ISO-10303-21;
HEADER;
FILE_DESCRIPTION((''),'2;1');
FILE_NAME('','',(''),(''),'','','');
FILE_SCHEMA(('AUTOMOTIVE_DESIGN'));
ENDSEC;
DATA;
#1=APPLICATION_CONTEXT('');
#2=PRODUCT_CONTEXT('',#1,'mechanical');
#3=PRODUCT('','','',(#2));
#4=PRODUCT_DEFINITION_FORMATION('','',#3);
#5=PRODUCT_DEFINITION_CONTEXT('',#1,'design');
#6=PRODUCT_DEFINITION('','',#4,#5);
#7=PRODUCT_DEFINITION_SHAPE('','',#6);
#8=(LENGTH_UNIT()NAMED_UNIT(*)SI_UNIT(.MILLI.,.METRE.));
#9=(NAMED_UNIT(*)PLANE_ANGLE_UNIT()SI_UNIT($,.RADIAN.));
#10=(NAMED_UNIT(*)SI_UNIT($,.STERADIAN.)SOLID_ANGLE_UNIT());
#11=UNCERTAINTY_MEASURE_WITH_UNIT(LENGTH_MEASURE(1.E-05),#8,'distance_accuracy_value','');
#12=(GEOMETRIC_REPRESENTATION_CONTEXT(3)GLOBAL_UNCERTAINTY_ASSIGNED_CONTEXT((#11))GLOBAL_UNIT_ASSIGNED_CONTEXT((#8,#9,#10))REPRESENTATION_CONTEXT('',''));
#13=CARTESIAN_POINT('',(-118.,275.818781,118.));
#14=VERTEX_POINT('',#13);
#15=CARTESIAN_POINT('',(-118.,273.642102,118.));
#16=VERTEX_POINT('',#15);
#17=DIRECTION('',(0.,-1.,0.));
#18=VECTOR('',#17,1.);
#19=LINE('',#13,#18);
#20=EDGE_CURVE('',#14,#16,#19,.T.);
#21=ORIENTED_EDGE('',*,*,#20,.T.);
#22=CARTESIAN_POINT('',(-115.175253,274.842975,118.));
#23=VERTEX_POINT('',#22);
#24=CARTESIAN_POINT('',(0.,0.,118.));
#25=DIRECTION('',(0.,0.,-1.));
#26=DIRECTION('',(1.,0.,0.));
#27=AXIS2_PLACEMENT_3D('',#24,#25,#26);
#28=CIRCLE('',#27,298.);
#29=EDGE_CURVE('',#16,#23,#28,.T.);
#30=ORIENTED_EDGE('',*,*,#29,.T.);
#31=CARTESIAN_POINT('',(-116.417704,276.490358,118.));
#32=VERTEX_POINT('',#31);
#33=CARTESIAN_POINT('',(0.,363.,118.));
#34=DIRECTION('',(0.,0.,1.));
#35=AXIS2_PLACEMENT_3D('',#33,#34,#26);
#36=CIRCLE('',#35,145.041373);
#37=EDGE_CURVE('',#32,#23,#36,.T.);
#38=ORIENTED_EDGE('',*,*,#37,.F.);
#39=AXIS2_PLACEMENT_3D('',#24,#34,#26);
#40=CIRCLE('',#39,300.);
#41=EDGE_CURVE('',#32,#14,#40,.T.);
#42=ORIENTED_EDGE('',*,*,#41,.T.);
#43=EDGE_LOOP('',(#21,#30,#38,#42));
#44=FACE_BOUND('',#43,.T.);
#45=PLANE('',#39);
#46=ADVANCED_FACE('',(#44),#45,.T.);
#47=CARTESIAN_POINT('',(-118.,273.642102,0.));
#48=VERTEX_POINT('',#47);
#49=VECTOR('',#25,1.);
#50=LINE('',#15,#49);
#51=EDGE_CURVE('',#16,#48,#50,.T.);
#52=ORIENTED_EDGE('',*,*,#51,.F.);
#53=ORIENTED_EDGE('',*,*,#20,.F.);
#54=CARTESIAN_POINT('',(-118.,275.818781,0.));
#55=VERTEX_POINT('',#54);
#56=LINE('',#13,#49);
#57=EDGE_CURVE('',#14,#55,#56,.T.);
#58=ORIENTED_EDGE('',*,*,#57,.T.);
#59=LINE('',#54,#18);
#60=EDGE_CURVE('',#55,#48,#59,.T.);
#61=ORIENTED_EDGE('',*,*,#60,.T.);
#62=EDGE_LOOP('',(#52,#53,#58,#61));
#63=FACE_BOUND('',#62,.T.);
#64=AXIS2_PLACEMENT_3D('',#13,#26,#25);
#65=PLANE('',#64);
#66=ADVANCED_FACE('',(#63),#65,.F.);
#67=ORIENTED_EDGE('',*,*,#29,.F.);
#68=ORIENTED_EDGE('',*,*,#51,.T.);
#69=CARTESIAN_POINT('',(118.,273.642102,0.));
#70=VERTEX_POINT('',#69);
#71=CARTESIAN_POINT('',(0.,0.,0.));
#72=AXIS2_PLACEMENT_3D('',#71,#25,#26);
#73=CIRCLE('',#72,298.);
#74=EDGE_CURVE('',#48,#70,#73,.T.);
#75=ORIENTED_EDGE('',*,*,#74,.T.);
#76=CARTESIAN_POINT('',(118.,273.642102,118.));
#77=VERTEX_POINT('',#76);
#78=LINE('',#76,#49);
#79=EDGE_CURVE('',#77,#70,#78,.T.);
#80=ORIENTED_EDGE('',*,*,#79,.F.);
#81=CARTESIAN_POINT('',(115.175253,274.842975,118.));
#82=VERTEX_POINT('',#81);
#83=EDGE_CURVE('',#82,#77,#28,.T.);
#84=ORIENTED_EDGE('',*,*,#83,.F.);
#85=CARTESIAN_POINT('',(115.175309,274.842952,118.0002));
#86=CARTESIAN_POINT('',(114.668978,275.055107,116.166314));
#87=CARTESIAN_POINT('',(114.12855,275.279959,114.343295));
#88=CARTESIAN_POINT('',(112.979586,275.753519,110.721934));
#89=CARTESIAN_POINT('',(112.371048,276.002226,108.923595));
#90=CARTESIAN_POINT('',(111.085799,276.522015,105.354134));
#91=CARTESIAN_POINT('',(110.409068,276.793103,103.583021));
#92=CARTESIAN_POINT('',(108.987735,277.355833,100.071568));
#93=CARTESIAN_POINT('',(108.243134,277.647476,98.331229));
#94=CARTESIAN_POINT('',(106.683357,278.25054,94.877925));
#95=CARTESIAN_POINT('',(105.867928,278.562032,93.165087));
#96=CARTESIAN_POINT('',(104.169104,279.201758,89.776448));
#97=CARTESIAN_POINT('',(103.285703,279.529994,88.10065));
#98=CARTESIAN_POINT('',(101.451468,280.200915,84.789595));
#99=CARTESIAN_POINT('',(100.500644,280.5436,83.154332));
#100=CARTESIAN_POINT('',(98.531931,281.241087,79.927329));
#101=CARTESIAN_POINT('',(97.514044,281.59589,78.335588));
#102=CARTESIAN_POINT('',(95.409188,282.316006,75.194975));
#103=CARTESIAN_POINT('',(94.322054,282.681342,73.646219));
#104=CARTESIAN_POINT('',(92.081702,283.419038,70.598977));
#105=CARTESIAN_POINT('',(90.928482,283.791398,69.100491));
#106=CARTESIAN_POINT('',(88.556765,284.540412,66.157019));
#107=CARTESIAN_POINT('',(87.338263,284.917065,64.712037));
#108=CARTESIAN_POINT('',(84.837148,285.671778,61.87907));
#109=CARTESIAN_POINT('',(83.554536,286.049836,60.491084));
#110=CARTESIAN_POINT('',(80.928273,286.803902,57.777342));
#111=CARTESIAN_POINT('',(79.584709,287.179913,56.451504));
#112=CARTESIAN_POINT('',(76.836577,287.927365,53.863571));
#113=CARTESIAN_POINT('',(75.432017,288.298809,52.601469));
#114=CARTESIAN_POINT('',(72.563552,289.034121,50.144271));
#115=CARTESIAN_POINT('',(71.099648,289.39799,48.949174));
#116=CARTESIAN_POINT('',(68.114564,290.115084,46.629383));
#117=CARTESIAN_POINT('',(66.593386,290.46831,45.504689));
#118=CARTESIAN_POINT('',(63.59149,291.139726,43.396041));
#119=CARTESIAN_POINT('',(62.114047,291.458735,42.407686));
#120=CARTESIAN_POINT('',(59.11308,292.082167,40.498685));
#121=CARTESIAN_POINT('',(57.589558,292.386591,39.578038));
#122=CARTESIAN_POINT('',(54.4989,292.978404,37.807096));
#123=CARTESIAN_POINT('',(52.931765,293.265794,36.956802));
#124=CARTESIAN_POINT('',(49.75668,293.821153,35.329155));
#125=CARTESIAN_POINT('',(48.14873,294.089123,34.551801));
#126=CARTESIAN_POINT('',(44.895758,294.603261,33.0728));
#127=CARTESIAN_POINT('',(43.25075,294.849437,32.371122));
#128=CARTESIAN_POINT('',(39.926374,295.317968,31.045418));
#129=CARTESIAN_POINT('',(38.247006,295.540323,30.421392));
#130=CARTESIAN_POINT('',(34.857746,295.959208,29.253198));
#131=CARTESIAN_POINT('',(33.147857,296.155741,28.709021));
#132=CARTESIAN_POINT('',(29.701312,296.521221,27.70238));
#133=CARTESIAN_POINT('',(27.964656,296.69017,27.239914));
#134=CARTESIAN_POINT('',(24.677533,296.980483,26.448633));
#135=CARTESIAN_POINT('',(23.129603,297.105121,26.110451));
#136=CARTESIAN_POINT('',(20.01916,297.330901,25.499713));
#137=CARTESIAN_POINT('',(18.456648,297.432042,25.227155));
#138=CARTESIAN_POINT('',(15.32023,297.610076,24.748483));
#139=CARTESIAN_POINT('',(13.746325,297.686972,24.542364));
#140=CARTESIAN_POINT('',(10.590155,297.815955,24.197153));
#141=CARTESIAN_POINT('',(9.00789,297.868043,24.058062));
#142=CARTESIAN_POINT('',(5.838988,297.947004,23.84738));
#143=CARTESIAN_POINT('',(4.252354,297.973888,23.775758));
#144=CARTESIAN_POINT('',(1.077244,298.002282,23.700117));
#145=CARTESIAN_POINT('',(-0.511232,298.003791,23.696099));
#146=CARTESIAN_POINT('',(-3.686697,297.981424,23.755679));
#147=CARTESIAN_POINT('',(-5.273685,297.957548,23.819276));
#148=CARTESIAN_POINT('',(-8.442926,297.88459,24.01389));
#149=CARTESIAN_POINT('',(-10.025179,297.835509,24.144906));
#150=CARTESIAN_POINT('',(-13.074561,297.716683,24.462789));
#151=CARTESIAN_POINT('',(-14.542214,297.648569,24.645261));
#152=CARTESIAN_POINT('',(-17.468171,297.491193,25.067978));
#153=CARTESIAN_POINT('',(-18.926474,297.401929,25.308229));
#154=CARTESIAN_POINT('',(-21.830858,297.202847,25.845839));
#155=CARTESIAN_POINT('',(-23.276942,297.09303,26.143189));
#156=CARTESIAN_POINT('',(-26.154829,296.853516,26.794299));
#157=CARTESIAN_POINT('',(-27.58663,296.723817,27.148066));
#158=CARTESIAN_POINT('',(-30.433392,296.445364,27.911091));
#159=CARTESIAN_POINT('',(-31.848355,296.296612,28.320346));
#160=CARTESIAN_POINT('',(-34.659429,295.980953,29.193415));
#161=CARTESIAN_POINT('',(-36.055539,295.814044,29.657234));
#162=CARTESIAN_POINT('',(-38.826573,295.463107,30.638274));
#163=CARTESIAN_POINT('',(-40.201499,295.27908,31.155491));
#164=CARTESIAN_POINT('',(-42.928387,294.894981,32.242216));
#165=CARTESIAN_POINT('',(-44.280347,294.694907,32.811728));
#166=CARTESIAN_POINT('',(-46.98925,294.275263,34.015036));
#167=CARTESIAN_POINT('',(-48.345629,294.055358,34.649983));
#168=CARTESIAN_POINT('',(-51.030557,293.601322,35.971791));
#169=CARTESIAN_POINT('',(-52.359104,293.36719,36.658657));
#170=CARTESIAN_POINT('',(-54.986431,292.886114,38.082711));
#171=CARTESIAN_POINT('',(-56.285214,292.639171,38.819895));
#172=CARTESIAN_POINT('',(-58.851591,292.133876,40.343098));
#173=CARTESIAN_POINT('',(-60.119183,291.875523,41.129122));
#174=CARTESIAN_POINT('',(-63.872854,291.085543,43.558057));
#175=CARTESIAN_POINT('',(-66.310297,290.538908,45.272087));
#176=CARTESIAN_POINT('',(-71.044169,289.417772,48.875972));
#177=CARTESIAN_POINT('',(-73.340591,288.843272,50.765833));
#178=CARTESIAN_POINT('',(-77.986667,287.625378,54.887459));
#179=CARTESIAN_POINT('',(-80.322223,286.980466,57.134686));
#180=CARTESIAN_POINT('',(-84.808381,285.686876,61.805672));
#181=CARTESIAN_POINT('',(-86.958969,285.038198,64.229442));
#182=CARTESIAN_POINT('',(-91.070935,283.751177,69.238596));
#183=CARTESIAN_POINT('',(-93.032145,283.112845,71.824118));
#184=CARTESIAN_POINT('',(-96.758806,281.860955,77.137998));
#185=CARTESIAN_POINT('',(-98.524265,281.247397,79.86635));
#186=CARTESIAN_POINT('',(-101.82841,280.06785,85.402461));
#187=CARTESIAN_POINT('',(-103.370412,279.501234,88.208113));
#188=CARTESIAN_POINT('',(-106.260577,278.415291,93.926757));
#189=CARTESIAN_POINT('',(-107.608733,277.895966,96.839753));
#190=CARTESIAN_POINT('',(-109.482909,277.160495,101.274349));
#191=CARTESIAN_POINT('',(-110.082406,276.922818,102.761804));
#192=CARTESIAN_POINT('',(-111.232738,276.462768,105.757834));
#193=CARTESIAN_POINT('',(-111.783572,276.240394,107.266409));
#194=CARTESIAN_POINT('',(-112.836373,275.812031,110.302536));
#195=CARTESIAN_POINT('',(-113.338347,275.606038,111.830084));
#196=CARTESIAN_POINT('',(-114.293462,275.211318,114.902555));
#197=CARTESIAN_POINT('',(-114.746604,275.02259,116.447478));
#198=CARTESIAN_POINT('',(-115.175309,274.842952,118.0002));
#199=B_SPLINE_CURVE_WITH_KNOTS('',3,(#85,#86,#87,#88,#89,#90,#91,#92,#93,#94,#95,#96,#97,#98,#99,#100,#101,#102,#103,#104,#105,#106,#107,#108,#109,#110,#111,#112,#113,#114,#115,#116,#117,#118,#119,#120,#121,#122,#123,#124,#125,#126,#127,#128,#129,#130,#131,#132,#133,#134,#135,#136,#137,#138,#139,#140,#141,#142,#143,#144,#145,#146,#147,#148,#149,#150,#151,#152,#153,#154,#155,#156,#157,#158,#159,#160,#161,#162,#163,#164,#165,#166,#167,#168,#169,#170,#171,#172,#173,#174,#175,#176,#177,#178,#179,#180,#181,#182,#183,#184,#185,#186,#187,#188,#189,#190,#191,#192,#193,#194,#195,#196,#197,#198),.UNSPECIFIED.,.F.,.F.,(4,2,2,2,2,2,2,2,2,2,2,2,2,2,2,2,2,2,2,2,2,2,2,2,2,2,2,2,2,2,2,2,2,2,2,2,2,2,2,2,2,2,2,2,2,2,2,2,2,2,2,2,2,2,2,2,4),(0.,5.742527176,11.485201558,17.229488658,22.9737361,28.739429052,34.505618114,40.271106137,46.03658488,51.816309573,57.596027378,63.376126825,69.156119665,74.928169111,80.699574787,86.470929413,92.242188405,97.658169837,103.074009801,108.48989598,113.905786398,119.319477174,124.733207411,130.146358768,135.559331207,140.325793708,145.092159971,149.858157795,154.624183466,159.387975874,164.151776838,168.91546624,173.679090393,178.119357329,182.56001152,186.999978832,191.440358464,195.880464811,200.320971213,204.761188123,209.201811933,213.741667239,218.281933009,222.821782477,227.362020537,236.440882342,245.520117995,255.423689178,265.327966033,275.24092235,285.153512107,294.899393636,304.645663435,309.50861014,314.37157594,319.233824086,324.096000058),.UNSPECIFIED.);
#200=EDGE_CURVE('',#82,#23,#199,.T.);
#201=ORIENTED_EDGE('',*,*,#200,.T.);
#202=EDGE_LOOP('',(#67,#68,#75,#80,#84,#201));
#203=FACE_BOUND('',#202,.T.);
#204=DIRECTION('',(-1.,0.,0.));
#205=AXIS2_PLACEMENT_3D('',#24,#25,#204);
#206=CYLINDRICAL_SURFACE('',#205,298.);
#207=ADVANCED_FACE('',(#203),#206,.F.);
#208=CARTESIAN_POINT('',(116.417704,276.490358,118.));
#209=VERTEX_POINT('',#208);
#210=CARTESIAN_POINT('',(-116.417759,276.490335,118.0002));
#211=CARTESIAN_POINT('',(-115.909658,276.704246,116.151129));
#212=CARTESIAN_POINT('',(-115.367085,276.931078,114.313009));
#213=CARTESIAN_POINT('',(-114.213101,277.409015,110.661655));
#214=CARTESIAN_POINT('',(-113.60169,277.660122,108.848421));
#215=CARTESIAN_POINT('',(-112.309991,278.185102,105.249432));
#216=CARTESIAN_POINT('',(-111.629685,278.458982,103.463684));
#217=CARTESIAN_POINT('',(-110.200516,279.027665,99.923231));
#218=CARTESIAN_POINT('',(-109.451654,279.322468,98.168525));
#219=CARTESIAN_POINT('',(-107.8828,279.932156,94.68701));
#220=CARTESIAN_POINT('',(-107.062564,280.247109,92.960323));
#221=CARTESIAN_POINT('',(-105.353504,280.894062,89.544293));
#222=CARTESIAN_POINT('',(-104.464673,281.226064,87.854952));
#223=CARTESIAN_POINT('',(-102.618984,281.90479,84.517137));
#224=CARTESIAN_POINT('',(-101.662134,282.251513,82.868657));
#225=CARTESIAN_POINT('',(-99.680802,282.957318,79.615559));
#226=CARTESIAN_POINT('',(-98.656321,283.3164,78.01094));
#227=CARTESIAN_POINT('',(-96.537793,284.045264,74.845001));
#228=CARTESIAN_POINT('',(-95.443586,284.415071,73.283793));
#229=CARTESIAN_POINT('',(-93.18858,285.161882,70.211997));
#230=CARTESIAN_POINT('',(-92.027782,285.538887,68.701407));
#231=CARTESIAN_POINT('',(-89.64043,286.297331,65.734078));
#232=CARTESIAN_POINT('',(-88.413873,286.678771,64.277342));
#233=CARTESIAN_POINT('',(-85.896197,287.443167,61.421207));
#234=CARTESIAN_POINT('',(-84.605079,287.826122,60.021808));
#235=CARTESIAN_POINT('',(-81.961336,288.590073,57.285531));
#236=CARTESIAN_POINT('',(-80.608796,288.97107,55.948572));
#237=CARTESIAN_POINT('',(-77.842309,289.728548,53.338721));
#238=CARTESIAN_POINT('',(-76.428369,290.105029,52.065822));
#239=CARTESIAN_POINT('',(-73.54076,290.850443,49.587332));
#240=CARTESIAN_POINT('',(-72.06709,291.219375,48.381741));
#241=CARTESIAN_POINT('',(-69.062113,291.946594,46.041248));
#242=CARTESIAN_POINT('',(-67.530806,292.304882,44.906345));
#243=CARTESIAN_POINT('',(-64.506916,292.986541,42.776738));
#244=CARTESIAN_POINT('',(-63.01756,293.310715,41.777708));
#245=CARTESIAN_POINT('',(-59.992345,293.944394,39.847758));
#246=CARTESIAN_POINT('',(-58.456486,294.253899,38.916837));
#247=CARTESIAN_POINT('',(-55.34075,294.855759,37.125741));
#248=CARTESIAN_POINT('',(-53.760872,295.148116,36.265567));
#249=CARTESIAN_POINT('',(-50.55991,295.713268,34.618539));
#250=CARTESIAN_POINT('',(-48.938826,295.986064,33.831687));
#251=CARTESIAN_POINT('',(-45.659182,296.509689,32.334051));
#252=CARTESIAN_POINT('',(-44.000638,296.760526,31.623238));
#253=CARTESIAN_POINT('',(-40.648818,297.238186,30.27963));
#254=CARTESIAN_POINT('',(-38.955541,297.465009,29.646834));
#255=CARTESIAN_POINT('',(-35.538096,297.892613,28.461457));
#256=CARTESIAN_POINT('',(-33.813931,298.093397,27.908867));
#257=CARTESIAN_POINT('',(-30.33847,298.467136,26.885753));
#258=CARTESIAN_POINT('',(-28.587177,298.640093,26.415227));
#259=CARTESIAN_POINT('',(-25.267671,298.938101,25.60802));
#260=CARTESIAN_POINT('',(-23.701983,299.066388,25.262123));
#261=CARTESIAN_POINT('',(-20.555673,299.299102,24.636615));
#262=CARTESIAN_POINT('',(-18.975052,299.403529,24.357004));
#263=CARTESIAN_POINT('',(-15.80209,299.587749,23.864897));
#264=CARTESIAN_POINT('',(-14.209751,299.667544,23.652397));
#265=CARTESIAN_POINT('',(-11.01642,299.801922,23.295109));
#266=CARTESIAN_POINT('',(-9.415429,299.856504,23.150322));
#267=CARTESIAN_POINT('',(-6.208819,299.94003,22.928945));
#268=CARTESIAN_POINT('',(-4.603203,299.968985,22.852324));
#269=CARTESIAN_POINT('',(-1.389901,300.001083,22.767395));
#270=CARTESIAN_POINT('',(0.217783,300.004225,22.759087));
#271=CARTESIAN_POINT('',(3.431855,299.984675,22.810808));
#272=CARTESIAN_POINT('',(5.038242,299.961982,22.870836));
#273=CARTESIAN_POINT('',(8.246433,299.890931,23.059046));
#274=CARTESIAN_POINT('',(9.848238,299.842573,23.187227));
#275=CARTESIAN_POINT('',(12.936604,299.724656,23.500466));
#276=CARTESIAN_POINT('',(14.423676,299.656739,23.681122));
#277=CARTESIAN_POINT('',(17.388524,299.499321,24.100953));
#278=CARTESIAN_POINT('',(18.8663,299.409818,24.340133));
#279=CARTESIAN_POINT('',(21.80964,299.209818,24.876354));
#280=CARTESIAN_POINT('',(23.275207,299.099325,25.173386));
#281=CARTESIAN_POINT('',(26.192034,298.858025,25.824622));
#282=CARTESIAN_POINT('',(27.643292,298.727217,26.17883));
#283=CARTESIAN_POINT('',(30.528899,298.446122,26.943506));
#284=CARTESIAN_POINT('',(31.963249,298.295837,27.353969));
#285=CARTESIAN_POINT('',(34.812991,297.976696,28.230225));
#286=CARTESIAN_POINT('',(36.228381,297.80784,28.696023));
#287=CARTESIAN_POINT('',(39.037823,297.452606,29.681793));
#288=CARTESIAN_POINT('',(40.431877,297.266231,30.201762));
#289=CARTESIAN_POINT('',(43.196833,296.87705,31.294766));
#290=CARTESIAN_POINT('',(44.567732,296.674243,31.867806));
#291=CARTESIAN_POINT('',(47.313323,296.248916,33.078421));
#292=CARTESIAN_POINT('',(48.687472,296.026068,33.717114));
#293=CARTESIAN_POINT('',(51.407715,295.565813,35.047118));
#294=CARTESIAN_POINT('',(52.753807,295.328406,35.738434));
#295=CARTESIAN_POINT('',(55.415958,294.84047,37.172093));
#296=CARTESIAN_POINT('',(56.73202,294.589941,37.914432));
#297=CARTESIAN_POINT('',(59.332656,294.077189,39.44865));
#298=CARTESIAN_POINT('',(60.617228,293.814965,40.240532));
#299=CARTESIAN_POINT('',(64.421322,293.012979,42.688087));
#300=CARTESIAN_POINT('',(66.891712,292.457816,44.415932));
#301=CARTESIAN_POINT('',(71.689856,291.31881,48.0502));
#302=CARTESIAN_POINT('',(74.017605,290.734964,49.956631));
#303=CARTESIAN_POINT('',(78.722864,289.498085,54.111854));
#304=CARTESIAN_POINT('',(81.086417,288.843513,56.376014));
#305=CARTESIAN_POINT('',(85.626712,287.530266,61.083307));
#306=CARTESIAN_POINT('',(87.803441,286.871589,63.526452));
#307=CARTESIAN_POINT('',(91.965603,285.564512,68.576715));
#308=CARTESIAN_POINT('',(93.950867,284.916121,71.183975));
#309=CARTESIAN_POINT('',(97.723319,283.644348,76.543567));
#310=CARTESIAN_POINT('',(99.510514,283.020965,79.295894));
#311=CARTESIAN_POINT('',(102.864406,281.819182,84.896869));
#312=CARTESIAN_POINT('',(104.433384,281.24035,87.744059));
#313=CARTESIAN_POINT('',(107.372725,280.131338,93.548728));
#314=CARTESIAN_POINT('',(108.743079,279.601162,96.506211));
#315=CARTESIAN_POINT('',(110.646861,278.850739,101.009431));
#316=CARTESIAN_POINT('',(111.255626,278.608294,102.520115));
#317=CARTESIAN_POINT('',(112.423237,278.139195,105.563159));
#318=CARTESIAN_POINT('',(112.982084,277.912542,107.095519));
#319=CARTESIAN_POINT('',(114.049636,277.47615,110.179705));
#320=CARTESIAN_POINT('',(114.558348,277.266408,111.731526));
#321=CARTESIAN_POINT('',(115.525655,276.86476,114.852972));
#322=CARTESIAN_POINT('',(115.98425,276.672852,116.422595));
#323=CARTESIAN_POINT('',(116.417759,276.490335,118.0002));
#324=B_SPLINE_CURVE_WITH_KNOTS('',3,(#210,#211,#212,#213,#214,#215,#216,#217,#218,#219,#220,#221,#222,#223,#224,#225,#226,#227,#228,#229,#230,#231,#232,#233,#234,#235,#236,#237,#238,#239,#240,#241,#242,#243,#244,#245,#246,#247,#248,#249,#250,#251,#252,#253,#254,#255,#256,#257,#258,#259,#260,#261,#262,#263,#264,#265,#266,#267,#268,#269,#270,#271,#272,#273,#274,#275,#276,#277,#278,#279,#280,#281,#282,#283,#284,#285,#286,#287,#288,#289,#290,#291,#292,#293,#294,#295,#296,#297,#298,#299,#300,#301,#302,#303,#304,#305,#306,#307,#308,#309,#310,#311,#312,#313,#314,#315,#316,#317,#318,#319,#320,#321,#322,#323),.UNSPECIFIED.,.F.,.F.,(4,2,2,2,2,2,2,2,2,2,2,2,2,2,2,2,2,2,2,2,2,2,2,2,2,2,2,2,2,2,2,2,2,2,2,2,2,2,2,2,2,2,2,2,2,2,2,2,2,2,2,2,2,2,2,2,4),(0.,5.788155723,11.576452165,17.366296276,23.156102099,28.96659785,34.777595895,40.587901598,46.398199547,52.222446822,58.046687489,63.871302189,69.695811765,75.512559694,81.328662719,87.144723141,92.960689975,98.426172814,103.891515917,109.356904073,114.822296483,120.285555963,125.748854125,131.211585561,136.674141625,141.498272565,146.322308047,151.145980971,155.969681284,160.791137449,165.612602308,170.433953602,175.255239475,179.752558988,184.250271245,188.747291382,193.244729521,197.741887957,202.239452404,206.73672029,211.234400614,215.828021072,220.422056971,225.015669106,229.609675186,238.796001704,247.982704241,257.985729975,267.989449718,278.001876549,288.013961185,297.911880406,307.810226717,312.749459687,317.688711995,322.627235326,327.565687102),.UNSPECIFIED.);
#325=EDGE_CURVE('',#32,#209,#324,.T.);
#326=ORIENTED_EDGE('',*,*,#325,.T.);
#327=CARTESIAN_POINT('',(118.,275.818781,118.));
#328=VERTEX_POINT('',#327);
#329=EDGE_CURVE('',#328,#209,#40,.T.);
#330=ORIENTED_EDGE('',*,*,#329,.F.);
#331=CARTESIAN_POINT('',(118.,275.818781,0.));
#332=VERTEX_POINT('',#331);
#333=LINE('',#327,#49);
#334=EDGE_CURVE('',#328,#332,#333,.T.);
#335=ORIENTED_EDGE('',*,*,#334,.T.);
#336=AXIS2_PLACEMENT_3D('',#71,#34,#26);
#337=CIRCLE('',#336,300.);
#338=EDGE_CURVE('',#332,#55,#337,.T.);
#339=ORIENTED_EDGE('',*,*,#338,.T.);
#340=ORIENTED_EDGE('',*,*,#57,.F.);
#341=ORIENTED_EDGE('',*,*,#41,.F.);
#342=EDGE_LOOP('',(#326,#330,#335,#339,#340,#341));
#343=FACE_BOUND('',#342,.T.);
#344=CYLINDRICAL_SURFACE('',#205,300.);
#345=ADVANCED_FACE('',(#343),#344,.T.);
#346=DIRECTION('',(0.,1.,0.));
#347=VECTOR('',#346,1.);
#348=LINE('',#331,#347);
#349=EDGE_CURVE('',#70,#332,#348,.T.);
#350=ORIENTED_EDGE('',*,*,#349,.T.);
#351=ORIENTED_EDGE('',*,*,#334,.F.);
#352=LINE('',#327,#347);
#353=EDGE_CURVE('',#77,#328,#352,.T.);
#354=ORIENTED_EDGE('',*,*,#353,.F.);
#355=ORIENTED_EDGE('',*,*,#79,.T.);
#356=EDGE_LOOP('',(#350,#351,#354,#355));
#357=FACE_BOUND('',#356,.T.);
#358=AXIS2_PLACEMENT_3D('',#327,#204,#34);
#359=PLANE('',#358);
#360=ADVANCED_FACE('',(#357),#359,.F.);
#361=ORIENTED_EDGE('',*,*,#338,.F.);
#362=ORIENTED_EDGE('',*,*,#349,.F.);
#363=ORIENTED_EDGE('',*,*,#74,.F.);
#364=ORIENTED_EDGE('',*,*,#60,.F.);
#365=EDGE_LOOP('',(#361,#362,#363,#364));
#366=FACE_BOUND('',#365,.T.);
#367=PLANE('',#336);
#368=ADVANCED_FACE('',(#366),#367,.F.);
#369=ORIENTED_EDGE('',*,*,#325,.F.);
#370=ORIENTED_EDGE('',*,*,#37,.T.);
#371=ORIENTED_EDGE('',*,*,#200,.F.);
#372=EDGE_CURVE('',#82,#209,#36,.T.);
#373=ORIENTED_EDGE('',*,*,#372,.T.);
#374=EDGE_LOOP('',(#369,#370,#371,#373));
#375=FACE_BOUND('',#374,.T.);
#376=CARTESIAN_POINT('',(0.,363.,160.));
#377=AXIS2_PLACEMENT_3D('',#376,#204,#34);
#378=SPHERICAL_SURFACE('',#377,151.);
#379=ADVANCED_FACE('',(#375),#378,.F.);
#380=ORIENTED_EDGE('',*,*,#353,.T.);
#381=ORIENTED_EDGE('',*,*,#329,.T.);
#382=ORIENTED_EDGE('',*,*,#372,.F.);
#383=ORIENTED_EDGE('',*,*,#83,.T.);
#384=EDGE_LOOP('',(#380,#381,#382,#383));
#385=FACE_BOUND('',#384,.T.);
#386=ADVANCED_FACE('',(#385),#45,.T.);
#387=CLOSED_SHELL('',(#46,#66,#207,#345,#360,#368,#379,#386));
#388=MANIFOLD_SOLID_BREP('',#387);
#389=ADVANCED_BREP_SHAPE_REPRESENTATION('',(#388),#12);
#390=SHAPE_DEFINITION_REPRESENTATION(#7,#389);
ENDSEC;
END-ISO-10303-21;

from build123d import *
from OCP.BRepAlgoAPI import BRepAlgoAPI_Cut
from OCP.TopTools import TopTools_ListOfShape

# Parameters (mm, degrees)
BOSS_EXTRU_1_DEPTH = 118


with BuildPart() as part:
    # Esquisse1 → Boss.-Extru.1 (new body)
    with BuildSketch(Plane.XY):
        with BuildLine():
            Line((-118.00000000000003, 275.8187810864227), (-118.00000000000003, 273.6421020237931))
            ThreePointArc((-118.00000000000003, 273.6421020237931), (1.825e-14, 297.99999999999994), (117.99999999999997, 273.6421020237931))
            Line((117.99999999999997, 273.6421020237931), (117.99999999999997, 275.8187810864227))
            ThreePointArc((117.99999999999997, 275.8187810864227), (1.837e-14, 299.99999999999994), (-118.00000000000003, 275.8187810864227))
        make_face()
    extrude(amount=BOSS_EXTRU_1_DEPTH)


with BuildPart() as enl_vement_de_mati_re_r_volution5_tool:
    # Enlèvement de matière-Révolution5: read off the stored shape, not the designer's step
    # Enlèvement de matière-Révolution5 outlin → Enlèvement de matière-Révolution5 (revolve)
    with BuildSketch(Plane.XZ.offset(-363)):
        with BuildLine():
            Line((63.000003013, 118.0000001), (63.000003013, 22.770266996))
            ThreePointArc((63.000003013, 22.770266996), (114.400520521, 61.442803893), (145.041373437, 118.0000001))
            Line((145.041373437, 118.0000001), (63.000003013, 118.0000001))
        make_face()
    revolve(axis=Axis((0, 363, 0), (0, 0, 1)))


with BuildPart() as part_1:
    add(part.part)

    # Enlèvement de matière-Révolution5: cut by enl_vement_de_mati_re_r_volution5_tool, with a tolerance
    enl_vement_de_mati_re_r_volution5_stock = TopTools_ListOfShape()
    enl_vement_de_mati_re_r_volution5_stock.Append(part_1.part.wrapped)
    enl_vement_de_mati_re_r_volution5_tools = TopTools_ListOfShape()
    enl_vement_de_mati_re_r_volution5_tools.Append(enl_vement_de_mati_re_r_volution5_tool.part.wrapped)
    enl_vement_de_mati_re_r_volution5_cut = BRepAlgoAPI_Cut()
    enl_vement_de_mati_re_r_volution5_cut.SetArguments(enl_vement_de_mati_re_r_volution5_stock)
    enl_vement_de_mati_re_r_volution5_cut.SetTools(enl_vement_de_mati_re_r_volution5_tools)
    enl_vement_de_mati_re_r_volution5_cut.SetFuzzyValue(0.00001)
    enl_vement_de_mati_re_r_volution5_cut.Build()
    add(Compound.cast(enl_vement_de_mati_re_r_volution5_cut.Shape()).solids(), mode=Mode.REPLACE)


solid = part_1.part
